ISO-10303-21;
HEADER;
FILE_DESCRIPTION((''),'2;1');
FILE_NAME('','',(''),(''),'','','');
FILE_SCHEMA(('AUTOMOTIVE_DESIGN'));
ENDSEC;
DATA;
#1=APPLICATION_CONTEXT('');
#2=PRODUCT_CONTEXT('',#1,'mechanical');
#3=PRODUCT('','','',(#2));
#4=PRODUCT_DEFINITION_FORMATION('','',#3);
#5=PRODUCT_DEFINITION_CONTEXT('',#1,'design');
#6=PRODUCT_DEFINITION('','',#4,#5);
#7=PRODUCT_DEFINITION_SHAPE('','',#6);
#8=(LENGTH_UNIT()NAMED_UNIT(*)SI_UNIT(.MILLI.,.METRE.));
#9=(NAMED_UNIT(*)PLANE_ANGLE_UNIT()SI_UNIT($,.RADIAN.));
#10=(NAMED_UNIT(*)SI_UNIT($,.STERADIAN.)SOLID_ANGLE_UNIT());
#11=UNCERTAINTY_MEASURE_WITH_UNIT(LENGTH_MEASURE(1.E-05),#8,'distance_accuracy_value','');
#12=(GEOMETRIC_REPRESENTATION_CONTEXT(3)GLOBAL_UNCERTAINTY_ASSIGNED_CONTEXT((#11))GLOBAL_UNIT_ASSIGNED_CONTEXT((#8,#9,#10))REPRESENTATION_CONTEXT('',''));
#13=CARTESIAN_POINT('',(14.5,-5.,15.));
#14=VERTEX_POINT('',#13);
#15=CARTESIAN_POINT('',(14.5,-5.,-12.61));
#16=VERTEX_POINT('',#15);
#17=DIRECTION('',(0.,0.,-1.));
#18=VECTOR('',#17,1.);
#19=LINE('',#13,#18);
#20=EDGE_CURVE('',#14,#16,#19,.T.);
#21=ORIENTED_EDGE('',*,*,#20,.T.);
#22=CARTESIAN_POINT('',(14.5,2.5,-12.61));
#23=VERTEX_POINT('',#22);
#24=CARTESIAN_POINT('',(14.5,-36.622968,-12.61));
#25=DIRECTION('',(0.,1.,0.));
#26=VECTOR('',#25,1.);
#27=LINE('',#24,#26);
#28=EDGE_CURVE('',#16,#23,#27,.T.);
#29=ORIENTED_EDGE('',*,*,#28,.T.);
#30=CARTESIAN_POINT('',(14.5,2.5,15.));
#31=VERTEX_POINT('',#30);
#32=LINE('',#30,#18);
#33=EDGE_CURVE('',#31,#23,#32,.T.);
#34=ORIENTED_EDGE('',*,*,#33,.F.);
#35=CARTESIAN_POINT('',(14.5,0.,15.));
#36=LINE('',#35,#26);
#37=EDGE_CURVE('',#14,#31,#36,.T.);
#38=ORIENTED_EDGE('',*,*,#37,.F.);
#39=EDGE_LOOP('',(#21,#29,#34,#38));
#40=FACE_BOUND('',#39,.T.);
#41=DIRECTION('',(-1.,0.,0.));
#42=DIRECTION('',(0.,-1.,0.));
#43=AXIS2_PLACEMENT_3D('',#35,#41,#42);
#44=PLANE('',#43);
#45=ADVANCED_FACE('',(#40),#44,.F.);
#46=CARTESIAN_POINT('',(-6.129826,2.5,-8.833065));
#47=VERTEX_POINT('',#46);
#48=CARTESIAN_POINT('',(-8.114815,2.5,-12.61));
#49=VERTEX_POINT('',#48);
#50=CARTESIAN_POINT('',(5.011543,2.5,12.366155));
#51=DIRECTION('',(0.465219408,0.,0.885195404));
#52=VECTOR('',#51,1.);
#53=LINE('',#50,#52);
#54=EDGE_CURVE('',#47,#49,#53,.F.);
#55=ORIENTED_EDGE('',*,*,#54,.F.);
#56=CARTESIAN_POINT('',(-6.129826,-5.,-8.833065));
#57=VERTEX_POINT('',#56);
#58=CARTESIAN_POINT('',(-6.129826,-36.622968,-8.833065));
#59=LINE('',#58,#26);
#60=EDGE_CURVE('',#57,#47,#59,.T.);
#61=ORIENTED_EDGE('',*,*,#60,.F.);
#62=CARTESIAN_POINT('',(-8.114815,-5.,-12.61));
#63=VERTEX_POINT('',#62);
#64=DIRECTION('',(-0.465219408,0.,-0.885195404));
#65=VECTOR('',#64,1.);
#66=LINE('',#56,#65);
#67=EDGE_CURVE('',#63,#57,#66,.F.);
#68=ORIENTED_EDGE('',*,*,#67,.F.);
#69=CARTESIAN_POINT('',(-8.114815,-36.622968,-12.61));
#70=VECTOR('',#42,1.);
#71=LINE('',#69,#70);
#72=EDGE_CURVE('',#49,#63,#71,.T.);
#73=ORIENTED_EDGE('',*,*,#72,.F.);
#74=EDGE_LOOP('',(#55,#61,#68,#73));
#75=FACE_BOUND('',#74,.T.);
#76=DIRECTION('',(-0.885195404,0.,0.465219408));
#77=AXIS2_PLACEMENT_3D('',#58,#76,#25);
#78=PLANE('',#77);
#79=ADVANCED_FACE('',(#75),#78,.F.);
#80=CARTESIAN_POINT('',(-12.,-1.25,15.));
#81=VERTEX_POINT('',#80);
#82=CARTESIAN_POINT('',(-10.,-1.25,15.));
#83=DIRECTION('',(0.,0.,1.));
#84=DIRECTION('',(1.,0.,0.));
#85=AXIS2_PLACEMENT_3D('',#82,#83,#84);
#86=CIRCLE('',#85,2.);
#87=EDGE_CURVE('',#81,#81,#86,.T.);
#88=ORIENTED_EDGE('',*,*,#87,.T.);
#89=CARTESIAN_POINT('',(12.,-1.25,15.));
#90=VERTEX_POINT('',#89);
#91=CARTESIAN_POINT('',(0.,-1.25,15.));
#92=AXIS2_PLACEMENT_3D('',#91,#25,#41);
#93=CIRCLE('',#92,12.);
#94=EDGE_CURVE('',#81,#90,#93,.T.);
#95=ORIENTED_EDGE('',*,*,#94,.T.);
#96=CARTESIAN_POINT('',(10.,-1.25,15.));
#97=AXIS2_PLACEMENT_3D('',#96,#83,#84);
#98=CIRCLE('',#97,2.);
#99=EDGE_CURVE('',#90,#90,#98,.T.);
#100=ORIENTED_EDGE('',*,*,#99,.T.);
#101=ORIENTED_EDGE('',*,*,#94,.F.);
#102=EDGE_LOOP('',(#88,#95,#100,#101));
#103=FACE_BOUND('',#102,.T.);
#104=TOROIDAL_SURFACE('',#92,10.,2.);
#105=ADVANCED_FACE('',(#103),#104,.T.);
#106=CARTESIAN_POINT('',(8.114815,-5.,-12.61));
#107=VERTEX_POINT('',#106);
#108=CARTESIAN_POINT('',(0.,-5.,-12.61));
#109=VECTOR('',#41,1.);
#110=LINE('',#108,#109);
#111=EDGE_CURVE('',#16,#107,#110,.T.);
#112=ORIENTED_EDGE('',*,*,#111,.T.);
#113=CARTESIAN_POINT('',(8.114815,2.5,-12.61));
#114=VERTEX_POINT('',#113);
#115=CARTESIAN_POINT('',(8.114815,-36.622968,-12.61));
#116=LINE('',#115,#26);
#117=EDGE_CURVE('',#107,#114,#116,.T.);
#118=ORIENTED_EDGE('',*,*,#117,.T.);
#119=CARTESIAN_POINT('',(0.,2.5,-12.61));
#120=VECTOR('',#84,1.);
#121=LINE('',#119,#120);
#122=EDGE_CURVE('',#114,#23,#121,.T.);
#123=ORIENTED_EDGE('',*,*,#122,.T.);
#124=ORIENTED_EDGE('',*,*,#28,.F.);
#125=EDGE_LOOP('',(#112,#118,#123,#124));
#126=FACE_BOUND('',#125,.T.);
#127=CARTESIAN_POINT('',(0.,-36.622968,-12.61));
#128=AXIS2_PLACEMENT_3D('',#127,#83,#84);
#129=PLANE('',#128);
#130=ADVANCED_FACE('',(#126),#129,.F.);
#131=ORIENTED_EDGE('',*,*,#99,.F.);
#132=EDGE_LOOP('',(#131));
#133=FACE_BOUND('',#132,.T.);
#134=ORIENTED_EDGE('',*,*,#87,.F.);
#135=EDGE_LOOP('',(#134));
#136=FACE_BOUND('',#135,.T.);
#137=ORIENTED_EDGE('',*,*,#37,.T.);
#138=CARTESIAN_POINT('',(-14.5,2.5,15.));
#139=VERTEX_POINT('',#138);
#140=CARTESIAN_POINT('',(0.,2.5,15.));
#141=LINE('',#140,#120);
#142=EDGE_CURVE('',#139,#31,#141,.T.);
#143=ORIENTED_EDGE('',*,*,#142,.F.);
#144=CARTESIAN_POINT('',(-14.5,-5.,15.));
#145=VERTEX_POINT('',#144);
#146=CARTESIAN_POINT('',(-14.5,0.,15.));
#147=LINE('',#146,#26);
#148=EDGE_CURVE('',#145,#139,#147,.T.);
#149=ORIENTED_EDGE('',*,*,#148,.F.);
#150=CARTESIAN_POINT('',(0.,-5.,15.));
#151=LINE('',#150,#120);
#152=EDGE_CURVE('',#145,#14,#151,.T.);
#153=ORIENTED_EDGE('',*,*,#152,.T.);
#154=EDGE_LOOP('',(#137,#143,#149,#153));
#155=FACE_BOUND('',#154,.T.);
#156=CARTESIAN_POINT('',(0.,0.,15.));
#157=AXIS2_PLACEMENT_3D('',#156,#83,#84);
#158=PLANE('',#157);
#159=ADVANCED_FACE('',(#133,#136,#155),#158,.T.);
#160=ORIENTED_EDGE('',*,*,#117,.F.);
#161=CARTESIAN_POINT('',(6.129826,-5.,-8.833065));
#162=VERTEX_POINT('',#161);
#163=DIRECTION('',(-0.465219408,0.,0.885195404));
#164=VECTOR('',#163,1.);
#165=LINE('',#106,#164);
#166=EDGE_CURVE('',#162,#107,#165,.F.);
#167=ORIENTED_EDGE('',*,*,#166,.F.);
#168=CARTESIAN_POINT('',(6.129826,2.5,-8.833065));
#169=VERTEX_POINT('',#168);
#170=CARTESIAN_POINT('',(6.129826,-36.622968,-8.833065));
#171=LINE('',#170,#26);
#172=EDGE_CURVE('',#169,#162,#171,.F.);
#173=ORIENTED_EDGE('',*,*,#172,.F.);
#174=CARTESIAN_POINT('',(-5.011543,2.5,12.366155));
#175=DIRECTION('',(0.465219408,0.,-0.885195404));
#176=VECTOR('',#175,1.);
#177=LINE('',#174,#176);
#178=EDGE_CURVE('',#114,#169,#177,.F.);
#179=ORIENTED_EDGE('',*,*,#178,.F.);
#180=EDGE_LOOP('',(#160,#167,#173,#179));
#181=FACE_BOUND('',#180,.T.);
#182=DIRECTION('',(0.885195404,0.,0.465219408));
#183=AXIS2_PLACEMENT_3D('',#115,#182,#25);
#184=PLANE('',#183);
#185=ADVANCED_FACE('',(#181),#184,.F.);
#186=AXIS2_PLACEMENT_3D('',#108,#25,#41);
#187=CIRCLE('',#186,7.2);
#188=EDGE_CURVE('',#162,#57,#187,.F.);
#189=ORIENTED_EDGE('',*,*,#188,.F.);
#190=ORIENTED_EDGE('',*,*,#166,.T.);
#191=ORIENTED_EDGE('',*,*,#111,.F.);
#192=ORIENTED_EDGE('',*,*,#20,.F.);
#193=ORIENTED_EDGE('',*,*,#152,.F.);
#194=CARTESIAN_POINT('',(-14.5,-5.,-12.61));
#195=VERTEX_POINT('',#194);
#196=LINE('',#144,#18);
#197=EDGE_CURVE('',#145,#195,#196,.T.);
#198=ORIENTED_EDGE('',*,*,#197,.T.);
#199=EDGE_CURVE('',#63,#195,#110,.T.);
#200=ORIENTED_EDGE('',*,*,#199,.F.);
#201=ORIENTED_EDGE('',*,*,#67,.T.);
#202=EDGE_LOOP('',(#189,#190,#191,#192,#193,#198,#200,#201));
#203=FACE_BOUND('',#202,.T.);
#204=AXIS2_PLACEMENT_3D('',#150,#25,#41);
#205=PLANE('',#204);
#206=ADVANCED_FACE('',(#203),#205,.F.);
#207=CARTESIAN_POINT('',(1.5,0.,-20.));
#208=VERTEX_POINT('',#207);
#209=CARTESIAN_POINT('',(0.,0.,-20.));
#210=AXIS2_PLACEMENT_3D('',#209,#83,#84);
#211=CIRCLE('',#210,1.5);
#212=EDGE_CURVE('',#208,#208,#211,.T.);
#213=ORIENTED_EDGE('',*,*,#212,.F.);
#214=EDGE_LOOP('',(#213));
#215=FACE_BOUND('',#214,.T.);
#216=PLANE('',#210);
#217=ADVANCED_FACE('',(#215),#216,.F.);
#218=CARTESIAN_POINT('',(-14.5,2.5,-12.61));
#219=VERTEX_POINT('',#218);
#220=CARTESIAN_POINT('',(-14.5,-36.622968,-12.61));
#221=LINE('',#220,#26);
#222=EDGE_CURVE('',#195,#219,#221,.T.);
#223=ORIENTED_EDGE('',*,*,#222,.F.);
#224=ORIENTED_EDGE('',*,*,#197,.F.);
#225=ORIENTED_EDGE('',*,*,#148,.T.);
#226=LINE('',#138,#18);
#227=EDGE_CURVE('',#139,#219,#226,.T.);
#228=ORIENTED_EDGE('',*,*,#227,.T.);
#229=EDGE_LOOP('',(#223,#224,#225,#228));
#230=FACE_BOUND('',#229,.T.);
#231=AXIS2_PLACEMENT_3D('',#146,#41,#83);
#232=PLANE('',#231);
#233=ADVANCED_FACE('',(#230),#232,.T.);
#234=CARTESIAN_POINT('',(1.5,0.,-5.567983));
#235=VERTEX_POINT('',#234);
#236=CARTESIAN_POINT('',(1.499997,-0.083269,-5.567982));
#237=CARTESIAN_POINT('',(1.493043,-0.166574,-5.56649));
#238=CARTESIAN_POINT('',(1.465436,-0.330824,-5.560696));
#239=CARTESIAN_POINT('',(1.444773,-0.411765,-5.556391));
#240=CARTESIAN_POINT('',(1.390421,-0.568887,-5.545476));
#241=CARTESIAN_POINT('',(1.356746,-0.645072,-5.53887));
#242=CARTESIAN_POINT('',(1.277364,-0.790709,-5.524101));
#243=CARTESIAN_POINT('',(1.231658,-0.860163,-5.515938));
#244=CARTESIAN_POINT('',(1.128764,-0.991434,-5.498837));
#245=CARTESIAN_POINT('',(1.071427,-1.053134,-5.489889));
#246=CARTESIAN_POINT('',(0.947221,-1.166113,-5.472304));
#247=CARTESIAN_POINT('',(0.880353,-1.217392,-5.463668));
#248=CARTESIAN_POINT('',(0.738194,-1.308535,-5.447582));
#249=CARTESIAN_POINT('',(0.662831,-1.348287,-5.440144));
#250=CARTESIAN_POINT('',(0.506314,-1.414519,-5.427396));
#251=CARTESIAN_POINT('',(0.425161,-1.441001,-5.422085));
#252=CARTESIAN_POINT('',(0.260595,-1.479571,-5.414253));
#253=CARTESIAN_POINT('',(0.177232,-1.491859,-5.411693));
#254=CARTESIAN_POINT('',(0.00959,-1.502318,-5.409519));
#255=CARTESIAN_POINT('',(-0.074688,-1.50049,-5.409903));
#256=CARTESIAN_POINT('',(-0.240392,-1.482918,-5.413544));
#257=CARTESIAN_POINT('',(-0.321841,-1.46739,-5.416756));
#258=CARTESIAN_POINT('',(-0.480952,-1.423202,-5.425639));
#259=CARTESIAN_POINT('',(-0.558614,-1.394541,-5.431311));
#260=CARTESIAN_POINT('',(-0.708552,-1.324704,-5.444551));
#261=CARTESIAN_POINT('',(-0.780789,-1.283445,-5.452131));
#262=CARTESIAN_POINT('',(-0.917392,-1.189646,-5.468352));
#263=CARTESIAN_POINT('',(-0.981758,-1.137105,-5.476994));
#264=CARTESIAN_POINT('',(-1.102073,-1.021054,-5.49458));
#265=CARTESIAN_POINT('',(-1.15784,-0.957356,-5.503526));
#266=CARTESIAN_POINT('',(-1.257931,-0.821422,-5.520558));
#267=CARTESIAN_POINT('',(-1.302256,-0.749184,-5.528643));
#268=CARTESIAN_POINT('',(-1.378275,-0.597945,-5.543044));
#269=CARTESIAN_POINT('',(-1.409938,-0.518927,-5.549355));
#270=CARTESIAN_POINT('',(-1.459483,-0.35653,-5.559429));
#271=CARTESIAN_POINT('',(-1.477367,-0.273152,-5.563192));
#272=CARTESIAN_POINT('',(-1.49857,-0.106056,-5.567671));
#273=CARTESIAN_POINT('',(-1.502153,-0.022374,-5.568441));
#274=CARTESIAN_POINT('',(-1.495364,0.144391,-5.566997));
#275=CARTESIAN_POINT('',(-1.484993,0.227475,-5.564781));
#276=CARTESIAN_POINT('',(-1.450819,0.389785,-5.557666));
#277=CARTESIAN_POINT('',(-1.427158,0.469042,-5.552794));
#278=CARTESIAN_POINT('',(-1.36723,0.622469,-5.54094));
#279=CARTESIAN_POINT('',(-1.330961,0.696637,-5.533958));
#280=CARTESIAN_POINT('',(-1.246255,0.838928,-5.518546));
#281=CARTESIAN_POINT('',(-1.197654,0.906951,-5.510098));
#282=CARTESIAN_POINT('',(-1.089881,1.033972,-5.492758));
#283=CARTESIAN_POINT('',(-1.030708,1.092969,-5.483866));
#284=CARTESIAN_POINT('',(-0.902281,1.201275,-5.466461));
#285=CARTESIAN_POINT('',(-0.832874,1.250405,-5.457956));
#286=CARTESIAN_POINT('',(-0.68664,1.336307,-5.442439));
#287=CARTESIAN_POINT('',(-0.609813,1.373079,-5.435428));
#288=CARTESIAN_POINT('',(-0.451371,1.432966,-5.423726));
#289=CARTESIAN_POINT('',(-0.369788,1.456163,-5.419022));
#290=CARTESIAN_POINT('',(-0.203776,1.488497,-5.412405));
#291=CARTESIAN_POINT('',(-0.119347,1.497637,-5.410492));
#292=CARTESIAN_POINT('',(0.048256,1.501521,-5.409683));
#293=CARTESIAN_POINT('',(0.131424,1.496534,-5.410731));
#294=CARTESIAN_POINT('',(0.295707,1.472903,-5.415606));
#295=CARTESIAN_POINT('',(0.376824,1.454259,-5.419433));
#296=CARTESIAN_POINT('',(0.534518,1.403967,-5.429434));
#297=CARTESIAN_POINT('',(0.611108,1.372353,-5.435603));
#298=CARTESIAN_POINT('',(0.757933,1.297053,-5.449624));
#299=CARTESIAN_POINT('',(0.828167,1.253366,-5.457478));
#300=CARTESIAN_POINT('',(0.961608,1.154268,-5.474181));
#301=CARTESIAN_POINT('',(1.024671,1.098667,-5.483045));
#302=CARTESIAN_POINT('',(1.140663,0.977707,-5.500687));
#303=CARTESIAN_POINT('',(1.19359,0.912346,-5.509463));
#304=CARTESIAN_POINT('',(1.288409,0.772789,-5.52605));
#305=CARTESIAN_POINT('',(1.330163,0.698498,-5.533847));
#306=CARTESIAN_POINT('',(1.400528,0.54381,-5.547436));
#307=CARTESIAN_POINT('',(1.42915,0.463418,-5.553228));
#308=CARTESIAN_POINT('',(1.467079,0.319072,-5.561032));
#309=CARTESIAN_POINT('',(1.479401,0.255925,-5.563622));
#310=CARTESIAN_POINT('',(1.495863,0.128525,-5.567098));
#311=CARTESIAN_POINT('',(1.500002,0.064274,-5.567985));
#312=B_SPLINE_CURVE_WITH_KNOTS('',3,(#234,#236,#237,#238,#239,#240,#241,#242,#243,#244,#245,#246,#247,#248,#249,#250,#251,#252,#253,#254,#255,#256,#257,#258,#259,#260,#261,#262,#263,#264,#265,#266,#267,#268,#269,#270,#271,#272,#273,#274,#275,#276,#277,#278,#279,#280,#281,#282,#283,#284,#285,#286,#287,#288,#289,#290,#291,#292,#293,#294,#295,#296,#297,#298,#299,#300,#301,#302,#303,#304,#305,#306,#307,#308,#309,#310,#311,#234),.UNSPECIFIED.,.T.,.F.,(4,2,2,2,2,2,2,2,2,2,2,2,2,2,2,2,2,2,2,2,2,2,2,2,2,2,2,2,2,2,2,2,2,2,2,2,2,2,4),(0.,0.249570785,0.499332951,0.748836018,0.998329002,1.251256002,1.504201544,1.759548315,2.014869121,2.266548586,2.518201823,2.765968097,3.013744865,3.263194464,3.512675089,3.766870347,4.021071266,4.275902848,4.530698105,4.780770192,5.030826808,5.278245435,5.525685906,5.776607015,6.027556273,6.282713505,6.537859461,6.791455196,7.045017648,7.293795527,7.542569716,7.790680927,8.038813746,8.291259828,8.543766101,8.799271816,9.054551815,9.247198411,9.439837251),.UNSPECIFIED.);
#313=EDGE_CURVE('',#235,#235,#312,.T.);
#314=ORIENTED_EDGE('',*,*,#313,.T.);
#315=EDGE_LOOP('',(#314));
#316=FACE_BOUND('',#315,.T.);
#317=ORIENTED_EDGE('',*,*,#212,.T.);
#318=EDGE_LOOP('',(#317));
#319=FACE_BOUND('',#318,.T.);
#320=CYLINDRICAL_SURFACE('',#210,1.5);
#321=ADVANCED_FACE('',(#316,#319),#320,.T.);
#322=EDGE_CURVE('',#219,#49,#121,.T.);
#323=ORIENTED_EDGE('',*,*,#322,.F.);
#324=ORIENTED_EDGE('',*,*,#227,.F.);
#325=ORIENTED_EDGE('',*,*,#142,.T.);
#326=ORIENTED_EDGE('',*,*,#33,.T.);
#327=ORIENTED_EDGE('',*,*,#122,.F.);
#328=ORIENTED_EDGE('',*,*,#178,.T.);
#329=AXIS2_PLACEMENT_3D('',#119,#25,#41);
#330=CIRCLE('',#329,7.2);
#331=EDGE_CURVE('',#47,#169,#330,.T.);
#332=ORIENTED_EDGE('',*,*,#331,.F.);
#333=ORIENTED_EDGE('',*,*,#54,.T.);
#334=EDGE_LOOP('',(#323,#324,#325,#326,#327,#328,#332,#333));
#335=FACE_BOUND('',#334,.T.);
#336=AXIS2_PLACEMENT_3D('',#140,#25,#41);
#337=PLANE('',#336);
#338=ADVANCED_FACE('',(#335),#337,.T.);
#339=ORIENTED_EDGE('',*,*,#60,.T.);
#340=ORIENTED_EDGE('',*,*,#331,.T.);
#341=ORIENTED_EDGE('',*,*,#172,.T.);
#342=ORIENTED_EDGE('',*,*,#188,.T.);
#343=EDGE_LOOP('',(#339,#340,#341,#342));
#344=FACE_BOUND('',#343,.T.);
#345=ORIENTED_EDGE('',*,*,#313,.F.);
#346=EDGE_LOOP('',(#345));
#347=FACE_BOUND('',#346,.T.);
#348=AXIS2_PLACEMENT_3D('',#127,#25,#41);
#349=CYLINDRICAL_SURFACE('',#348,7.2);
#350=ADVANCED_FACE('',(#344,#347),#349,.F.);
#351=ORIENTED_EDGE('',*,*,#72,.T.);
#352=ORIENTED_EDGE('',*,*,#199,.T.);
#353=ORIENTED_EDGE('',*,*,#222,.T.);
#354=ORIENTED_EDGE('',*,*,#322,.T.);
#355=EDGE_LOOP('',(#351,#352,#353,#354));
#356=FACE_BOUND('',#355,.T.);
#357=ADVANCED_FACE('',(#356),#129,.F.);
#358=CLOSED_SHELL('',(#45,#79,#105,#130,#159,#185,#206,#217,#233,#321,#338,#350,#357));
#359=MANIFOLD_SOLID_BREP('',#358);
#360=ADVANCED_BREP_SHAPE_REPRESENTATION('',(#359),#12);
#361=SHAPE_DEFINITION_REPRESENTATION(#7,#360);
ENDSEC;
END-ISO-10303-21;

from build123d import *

# Parameters (mm, degrees)
SKETCH1_R           = 1.5
BOSS_EXTRUDE1_DEPTH = 20
BOSS_EXTRUDE2_START = 15
BOSS_EXTRUDE2_DEPTH = 15
SWEEP1_PROFILE_R    = 2
BOSS_EXTRUDE3_DEPTH = 7.5
CHAMFER1_START      = -6
CHAMFER1_DEPTH      = 9
CHAMFER1_START_2    = -5
CHAMFER1_2_DEPTH    = 7.5


with BuildPart() as part:
    # Sketch1 → Boss-Extrude1 (new body)
    with BuildSketch(Plane.XY):
        Circle(SKETCH1_R)
    extrude(amount=-BOSS_EXTRUDE1_DEPTH)

    # Sketch1<3> → Boss-Extrude2 (add)
    with BuildSketch(Plane.XY.offset(BOSS_EXTRUDE2_START)):
        with BuildLine():
            Line((0, 1.5), (0, 2.5))
            Line((0, 2.5), (-14.5, 2.5))
            Line((-14.5, 2.5), (-14.5, -5))
            Line((-14.5, -5), (0, -5))
            Line((0, -5), (0, -1.5))
            ThreePointArc((0, -1.5), (-1.5, 0), (0, 1.5))
        make_face()
        with BuildLine():
            ThreePointArc((1.5, 0), (1.060660172, 1.060660172), (0, 1.5))
            Line((0, 1.5), (0, -1.5))
            ThreePointArc((0, -1.5), (1.060660172, -1.060660172), (1.5, 0))
        make_face()
        with BuildLine():
            Line((0, -1.5), (0, 1.5))
            ThreePointArc((0, 1.5), (-1.5, 0), (0, -1.5))
        make_face()
        with BuildLine():
            Line((14.5, 2.5), (0, 2.5))
            Line((0, 2.5), (0, 1.5))
            ThreePointArc((0, 1.5), (1.060660172, 1.060660172), (1.5, 0))
            ThreePointArc((1.5, 0), (1.060660172, -1.060660172), (0, -1.5))
            Line((0, -1.5), (0, -5))
            Line((0, -5), (14.5, -5))
            Line((14.5, -5), (14.5, 2.5))
        make_face()
    extrude(amount=-BOSS_EXTRUDE2_DEPTH)

    # Sweep1: sweep along a path in Sketch2
    with BuildLine(Plane(origin=(0, -1.25, 0), x_dir=(1, 0, 0), z_dir=(0, 1, 0))) as sweep1_path:
        ThreePointArc((-10, -15), (0, -25), (10, -15))
    # Sweep1 profile (on start of the path) → Sweep1 (sweep)
    with BuildSketch(Plane(origin=(-10, -1.25, 15), x_dir=(1, 0, 0), z_dir=(0, 0, 1))):
        Circle(SWEEP1_PROFILE_R)
    sweep(path=sweep1_path.line)

    # Sketch15 → Boss-Extrude3 (add)
    with BuildSketch(Plane(origin=(0, 2.5, 0), x_dir=(1, 0, 0), z_dir=(0, 1, 0))):
        with BuildLine():
            ThreePointArc((-7.2, 12.61), (0, 5.41), (7.2, 12.61))
            Line((7.2, 12.61), (14.5, 12.61))
            Line((14.5, 12.61), (14.5, 0))
            Line((14.5, 0), (-14.5, 0))
            Line((-14.5, 0), (-14.5, 12.61))
            Line((-14.5, 12.61), (-7.2, 12.61))
        make_face()
    extrude(amount=-BOSS_EXTRUDE3_DEPTH)

    # Chamfer1: read off the stored shape, not the designer's step
    # Chamfer1 outline → Chamfer1 (cut)
    with BuildSketch(Plane(origin=(0, 0, 0), x_dir=(1, 0, 0), z_dir=(0, 1, 0)).offset(CHAMFER1_START)):
        with BuildLine():
            ThreePointArc((7.2, 12.61), (7.04514475, 11.12476081), (6.587240153, 9.7034097))
            Line((6.587240153, 9.7034097), (8.114814982, 12.61))
            Line((8.114814982, 12.61), (7.2, 12.61))
        make_face()
        with BuildLine():
            Line((-8.114814982, 12.61), (-6.587240153, 9.7034097))
            ThreePointArc((-6.587240153, 9.7034097), (-7.04514475, 11.12476081), (-7.2, 12.61))
            Line((-7.2, 12.61), (-8.114814982, 12.61))
        make_face()
    extrude(amount=CHAMFER1_DEPTH, mode=Mode.SUBTRACT)

    # Chamfer1 2 outline → Chamfer1 2 (add)
    with BuildSketch(Plane(origin=(0, 0, 0), x_dir=(1, 0, 0), z_dir=(0, 1, 0)).offset(CHAMFER1_START_2)):
        with BuildLine():
            ThreePointArc((-6.587240153, 9.7034097), (-6.373406906, 9.260420263), (-6.129825647, 8.83306506))
            Line((-6.129825647, 8.83306506), (-6.587240153, 9.7034097))
        make_face()
        with BuildLine():
            Line((6.587240153, 9.7034097), (6.129825647, 8.83306506))
            ThreePointArc((6.129825647, 8.83306506), (6.373406906, 9.260420263), (6.587240153, 9.7034097))
        make_face()
    extrude(amount=CHAMFER1_2_DEPTH)


solid = part.part
